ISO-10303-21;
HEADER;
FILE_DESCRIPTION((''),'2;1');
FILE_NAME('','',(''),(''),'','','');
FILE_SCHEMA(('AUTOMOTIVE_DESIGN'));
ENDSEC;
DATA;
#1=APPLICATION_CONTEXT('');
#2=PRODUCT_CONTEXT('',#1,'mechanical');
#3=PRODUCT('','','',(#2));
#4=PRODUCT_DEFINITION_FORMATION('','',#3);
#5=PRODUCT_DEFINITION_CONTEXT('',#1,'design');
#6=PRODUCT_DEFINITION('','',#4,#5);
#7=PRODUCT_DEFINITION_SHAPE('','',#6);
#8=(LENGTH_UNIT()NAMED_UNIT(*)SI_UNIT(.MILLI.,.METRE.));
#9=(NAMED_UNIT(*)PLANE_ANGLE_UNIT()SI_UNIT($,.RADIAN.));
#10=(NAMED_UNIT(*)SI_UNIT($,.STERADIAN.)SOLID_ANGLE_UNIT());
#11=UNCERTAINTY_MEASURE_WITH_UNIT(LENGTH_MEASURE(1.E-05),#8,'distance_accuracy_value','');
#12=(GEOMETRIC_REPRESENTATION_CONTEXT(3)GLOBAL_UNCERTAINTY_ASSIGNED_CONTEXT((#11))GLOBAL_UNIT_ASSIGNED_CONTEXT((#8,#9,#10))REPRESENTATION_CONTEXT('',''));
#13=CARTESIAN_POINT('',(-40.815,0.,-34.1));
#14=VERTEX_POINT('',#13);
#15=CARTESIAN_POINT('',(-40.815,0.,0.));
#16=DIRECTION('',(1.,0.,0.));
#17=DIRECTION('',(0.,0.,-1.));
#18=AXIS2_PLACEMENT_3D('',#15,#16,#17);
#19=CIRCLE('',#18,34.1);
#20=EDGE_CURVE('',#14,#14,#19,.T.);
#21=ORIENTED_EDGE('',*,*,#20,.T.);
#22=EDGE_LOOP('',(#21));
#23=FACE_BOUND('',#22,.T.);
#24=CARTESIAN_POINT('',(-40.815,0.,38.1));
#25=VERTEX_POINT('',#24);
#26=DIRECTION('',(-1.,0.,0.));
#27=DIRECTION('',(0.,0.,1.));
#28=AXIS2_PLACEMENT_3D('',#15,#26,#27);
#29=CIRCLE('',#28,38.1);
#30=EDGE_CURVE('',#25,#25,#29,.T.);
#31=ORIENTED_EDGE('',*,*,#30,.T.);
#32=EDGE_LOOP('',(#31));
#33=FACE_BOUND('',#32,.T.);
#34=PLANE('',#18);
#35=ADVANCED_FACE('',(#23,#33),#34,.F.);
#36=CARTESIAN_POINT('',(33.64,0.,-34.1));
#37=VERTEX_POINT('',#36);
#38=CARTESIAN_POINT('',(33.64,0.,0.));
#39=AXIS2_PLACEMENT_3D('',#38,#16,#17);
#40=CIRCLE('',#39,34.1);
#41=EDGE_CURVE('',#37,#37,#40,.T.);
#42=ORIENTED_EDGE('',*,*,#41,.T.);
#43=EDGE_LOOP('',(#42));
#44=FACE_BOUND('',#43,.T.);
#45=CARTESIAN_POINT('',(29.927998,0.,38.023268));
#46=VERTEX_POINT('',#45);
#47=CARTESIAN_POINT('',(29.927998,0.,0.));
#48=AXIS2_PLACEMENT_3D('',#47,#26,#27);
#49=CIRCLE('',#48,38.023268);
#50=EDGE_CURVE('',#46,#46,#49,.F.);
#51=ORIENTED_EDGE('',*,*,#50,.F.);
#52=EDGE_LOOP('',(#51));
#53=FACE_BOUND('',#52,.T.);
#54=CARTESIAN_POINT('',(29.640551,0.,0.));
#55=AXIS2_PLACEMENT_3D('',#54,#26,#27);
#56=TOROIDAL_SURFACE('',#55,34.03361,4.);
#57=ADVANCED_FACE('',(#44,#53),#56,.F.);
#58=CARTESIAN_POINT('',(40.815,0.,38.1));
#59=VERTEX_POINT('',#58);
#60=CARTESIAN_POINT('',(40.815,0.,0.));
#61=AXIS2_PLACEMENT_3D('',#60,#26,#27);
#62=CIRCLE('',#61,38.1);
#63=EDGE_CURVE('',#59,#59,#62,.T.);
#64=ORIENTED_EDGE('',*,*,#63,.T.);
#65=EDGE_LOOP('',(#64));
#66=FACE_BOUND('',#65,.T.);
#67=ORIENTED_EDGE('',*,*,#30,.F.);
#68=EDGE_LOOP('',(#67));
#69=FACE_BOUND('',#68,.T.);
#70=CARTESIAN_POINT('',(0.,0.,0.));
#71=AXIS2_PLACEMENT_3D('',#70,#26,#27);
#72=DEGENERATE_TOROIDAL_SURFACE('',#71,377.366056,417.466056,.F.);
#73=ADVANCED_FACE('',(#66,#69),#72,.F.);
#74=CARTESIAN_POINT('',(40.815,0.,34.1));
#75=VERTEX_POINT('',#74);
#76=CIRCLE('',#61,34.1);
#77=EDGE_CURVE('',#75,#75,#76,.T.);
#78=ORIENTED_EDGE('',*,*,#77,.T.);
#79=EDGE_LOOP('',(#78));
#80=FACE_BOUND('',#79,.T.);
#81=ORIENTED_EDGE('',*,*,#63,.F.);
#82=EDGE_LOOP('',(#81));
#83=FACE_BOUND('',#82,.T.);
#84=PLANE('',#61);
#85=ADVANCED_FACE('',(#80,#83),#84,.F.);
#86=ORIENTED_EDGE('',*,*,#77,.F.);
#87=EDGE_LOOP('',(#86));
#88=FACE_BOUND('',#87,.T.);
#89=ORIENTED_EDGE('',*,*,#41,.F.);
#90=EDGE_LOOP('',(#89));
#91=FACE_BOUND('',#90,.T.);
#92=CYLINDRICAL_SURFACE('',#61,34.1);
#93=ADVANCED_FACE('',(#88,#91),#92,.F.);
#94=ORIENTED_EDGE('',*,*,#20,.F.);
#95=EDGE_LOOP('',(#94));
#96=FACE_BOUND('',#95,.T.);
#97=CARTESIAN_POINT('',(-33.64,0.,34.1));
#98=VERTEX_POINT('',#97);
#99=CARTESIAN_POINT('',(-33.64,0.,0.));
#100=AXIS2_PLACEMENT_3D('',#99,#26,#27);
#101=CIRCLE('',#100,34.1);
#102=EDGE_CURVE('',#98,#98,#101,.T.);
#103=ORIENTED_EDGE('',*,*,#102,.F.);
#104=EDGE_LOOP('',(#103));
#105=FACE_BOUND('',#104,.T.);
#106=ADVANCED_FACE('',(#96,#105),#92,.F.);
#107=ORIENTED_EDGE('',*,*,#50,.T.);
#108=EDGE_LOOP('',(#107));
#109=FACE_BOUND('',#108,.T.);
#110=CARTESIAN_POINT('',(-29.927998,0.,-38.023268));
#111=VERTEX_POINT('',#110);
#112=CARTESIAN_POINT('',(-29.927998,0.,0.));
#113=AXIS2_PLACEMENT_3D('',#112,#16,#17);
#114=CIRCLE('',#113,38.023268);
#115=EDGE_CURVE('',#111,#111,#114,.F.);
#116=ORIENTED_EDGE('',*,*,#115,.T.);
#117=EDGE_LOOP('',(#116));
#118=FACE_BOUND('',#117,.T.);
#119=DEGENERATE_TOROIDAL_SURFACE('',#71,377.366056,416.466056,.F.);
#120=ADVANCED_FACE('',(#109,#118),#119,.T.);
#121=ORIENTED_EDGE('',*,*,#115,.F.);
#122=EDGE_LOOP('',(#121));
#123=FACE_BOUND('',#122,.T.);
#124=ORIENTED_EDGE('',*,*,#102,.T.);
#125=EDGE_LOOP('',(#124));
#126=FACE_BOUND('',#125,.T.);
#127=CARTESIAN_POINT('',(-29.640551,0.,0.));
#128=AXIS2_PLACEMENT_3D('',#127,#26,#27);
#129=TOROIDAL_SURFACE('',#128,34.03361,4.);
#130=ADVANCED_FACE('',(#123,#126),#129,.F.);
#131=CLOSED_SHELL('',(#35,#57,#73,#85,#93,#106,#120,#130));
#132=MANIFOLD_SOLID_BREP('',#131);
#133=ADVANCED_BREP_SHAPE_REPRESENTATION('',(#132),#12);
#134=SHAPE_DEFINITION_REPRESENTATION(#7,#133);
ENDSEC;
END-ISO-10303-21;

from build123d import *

# Parameters (mm, degrees)
CUT_EXTRUDE1_DEPTH      = 100.395557911
CUT_EXTRUDE1_DEPTH_BACK = 100.395557911
SKETCH2_R               = 34.1
FILLET2_R               = 4


with BuildPart() as part:
    # Sketch1 → Revolve2 (revolve)
    with BuildSketch(Plane.XY, mode=Mode.PRIVATE) as revolve2_sk:
        with BuildLine():
            Line((-40.815, 0), (-40.815, 38.1))
            ThreePointArc((-40.815, 38.1), (0, 40.1), (40.815, 38.1))
            Line((40.815, 38.1), (40.815, 0))
            Line((40.815, 0), (33.64, 0))
            Line((33.64, 0), (33.64, 37.739142957))
            ThreePointArc((33.64, 37.739142957), (0, 39.1), (-33.64, 37.739142957))
            Line((-33.64, 37.739142957), (-33.64, 0))
            Line((-33.64, 0), (-40.815, 0))
        make_face()
    revolve(revolve2_sk.sketch.rotate(Axis((-40.815, 0, 0), (1, 0, 0)), 90), axis=Axis((-40.815, 0, 0), (1, 0, 0)))

    # Sketch2 → Cut-Extrude1 (cut, two sides: drawn at the far end of the back side and taken through both)
    with BuildSketch(Plane.ZY.offset(40.815).offset(-CUT_EXTRUDE1_DEPTH_BACK)):
        Circle(SKETCH2_R)
    extrude(amount=CUT_EXTRUDE1_DEPTH + CUT_EXTRUDE1_DEPTH_BACK, mode=Mode.SUBTRACT)

    # Fillet2
    # the kernel refuses this fillet: 4 mm, written as the material it adds along each edge
    with BuildSketch(Plane(origin=(-33.64, 0, 0), x_dir=(0, 0, 1), z_dir=(0, 1, 0))) as fillet2_piece_1:
        with BuildLine():
            CenterArc((34.033609884, 3.999449006), FILLET2_R, 270.951012029, 84.928058405)
            Line((38.02326828, 3.712001828), (38.103061448, 3.706252884))
            ThreePointArc((38.103061448, 3.706252884), (37.96512009, 1.849577904), (37.818881546, -0.006461991))
            Line((37.818881546, -0.006461991), (37.739142957, -0.08))
            ThreePointArc((37.739142957, -0.08), (35.919571478, -0.08), (34.101327802, -0.07998898))
            Line((34.101327802, -0.07998898), (34.1, 0))
        make_face()
    revolve(axis=Axis((-33.64, 0, 0), (1, 0, 0)))
    with BuildSketch(Plane(origin=(33.64, 0, 0), x_dir=(0, 0, 1), z_dir=(0, 1, 0))) as fillet2_piece_2:
        with BuildLine():
            CenterArc((34.033609884, -3.999449006), FILLET2_R, 4.120929567, 84.928058405)
            Line((34.1, 0), (34.101327802, 0.07998898))
            ThreePointArc((34.101327802, 0.07998898), (35.919571478, 0.08), (37.739142957, 0.08))
            Line((37.739142957, 0.08), (37.818881546, 0.006461991))
            ThreePointArc((37.818881546, 0.006461991), (37.96512009, -1.849577904), (38.103061448, -3.706252884))
            Line((38.103061448, -3.706252884), (38.02326828, -3.712001828))
        make_face()
    revolve(axis=Axis((33.64, 0, 0), (1, 0, 0)))


solid = part.part
